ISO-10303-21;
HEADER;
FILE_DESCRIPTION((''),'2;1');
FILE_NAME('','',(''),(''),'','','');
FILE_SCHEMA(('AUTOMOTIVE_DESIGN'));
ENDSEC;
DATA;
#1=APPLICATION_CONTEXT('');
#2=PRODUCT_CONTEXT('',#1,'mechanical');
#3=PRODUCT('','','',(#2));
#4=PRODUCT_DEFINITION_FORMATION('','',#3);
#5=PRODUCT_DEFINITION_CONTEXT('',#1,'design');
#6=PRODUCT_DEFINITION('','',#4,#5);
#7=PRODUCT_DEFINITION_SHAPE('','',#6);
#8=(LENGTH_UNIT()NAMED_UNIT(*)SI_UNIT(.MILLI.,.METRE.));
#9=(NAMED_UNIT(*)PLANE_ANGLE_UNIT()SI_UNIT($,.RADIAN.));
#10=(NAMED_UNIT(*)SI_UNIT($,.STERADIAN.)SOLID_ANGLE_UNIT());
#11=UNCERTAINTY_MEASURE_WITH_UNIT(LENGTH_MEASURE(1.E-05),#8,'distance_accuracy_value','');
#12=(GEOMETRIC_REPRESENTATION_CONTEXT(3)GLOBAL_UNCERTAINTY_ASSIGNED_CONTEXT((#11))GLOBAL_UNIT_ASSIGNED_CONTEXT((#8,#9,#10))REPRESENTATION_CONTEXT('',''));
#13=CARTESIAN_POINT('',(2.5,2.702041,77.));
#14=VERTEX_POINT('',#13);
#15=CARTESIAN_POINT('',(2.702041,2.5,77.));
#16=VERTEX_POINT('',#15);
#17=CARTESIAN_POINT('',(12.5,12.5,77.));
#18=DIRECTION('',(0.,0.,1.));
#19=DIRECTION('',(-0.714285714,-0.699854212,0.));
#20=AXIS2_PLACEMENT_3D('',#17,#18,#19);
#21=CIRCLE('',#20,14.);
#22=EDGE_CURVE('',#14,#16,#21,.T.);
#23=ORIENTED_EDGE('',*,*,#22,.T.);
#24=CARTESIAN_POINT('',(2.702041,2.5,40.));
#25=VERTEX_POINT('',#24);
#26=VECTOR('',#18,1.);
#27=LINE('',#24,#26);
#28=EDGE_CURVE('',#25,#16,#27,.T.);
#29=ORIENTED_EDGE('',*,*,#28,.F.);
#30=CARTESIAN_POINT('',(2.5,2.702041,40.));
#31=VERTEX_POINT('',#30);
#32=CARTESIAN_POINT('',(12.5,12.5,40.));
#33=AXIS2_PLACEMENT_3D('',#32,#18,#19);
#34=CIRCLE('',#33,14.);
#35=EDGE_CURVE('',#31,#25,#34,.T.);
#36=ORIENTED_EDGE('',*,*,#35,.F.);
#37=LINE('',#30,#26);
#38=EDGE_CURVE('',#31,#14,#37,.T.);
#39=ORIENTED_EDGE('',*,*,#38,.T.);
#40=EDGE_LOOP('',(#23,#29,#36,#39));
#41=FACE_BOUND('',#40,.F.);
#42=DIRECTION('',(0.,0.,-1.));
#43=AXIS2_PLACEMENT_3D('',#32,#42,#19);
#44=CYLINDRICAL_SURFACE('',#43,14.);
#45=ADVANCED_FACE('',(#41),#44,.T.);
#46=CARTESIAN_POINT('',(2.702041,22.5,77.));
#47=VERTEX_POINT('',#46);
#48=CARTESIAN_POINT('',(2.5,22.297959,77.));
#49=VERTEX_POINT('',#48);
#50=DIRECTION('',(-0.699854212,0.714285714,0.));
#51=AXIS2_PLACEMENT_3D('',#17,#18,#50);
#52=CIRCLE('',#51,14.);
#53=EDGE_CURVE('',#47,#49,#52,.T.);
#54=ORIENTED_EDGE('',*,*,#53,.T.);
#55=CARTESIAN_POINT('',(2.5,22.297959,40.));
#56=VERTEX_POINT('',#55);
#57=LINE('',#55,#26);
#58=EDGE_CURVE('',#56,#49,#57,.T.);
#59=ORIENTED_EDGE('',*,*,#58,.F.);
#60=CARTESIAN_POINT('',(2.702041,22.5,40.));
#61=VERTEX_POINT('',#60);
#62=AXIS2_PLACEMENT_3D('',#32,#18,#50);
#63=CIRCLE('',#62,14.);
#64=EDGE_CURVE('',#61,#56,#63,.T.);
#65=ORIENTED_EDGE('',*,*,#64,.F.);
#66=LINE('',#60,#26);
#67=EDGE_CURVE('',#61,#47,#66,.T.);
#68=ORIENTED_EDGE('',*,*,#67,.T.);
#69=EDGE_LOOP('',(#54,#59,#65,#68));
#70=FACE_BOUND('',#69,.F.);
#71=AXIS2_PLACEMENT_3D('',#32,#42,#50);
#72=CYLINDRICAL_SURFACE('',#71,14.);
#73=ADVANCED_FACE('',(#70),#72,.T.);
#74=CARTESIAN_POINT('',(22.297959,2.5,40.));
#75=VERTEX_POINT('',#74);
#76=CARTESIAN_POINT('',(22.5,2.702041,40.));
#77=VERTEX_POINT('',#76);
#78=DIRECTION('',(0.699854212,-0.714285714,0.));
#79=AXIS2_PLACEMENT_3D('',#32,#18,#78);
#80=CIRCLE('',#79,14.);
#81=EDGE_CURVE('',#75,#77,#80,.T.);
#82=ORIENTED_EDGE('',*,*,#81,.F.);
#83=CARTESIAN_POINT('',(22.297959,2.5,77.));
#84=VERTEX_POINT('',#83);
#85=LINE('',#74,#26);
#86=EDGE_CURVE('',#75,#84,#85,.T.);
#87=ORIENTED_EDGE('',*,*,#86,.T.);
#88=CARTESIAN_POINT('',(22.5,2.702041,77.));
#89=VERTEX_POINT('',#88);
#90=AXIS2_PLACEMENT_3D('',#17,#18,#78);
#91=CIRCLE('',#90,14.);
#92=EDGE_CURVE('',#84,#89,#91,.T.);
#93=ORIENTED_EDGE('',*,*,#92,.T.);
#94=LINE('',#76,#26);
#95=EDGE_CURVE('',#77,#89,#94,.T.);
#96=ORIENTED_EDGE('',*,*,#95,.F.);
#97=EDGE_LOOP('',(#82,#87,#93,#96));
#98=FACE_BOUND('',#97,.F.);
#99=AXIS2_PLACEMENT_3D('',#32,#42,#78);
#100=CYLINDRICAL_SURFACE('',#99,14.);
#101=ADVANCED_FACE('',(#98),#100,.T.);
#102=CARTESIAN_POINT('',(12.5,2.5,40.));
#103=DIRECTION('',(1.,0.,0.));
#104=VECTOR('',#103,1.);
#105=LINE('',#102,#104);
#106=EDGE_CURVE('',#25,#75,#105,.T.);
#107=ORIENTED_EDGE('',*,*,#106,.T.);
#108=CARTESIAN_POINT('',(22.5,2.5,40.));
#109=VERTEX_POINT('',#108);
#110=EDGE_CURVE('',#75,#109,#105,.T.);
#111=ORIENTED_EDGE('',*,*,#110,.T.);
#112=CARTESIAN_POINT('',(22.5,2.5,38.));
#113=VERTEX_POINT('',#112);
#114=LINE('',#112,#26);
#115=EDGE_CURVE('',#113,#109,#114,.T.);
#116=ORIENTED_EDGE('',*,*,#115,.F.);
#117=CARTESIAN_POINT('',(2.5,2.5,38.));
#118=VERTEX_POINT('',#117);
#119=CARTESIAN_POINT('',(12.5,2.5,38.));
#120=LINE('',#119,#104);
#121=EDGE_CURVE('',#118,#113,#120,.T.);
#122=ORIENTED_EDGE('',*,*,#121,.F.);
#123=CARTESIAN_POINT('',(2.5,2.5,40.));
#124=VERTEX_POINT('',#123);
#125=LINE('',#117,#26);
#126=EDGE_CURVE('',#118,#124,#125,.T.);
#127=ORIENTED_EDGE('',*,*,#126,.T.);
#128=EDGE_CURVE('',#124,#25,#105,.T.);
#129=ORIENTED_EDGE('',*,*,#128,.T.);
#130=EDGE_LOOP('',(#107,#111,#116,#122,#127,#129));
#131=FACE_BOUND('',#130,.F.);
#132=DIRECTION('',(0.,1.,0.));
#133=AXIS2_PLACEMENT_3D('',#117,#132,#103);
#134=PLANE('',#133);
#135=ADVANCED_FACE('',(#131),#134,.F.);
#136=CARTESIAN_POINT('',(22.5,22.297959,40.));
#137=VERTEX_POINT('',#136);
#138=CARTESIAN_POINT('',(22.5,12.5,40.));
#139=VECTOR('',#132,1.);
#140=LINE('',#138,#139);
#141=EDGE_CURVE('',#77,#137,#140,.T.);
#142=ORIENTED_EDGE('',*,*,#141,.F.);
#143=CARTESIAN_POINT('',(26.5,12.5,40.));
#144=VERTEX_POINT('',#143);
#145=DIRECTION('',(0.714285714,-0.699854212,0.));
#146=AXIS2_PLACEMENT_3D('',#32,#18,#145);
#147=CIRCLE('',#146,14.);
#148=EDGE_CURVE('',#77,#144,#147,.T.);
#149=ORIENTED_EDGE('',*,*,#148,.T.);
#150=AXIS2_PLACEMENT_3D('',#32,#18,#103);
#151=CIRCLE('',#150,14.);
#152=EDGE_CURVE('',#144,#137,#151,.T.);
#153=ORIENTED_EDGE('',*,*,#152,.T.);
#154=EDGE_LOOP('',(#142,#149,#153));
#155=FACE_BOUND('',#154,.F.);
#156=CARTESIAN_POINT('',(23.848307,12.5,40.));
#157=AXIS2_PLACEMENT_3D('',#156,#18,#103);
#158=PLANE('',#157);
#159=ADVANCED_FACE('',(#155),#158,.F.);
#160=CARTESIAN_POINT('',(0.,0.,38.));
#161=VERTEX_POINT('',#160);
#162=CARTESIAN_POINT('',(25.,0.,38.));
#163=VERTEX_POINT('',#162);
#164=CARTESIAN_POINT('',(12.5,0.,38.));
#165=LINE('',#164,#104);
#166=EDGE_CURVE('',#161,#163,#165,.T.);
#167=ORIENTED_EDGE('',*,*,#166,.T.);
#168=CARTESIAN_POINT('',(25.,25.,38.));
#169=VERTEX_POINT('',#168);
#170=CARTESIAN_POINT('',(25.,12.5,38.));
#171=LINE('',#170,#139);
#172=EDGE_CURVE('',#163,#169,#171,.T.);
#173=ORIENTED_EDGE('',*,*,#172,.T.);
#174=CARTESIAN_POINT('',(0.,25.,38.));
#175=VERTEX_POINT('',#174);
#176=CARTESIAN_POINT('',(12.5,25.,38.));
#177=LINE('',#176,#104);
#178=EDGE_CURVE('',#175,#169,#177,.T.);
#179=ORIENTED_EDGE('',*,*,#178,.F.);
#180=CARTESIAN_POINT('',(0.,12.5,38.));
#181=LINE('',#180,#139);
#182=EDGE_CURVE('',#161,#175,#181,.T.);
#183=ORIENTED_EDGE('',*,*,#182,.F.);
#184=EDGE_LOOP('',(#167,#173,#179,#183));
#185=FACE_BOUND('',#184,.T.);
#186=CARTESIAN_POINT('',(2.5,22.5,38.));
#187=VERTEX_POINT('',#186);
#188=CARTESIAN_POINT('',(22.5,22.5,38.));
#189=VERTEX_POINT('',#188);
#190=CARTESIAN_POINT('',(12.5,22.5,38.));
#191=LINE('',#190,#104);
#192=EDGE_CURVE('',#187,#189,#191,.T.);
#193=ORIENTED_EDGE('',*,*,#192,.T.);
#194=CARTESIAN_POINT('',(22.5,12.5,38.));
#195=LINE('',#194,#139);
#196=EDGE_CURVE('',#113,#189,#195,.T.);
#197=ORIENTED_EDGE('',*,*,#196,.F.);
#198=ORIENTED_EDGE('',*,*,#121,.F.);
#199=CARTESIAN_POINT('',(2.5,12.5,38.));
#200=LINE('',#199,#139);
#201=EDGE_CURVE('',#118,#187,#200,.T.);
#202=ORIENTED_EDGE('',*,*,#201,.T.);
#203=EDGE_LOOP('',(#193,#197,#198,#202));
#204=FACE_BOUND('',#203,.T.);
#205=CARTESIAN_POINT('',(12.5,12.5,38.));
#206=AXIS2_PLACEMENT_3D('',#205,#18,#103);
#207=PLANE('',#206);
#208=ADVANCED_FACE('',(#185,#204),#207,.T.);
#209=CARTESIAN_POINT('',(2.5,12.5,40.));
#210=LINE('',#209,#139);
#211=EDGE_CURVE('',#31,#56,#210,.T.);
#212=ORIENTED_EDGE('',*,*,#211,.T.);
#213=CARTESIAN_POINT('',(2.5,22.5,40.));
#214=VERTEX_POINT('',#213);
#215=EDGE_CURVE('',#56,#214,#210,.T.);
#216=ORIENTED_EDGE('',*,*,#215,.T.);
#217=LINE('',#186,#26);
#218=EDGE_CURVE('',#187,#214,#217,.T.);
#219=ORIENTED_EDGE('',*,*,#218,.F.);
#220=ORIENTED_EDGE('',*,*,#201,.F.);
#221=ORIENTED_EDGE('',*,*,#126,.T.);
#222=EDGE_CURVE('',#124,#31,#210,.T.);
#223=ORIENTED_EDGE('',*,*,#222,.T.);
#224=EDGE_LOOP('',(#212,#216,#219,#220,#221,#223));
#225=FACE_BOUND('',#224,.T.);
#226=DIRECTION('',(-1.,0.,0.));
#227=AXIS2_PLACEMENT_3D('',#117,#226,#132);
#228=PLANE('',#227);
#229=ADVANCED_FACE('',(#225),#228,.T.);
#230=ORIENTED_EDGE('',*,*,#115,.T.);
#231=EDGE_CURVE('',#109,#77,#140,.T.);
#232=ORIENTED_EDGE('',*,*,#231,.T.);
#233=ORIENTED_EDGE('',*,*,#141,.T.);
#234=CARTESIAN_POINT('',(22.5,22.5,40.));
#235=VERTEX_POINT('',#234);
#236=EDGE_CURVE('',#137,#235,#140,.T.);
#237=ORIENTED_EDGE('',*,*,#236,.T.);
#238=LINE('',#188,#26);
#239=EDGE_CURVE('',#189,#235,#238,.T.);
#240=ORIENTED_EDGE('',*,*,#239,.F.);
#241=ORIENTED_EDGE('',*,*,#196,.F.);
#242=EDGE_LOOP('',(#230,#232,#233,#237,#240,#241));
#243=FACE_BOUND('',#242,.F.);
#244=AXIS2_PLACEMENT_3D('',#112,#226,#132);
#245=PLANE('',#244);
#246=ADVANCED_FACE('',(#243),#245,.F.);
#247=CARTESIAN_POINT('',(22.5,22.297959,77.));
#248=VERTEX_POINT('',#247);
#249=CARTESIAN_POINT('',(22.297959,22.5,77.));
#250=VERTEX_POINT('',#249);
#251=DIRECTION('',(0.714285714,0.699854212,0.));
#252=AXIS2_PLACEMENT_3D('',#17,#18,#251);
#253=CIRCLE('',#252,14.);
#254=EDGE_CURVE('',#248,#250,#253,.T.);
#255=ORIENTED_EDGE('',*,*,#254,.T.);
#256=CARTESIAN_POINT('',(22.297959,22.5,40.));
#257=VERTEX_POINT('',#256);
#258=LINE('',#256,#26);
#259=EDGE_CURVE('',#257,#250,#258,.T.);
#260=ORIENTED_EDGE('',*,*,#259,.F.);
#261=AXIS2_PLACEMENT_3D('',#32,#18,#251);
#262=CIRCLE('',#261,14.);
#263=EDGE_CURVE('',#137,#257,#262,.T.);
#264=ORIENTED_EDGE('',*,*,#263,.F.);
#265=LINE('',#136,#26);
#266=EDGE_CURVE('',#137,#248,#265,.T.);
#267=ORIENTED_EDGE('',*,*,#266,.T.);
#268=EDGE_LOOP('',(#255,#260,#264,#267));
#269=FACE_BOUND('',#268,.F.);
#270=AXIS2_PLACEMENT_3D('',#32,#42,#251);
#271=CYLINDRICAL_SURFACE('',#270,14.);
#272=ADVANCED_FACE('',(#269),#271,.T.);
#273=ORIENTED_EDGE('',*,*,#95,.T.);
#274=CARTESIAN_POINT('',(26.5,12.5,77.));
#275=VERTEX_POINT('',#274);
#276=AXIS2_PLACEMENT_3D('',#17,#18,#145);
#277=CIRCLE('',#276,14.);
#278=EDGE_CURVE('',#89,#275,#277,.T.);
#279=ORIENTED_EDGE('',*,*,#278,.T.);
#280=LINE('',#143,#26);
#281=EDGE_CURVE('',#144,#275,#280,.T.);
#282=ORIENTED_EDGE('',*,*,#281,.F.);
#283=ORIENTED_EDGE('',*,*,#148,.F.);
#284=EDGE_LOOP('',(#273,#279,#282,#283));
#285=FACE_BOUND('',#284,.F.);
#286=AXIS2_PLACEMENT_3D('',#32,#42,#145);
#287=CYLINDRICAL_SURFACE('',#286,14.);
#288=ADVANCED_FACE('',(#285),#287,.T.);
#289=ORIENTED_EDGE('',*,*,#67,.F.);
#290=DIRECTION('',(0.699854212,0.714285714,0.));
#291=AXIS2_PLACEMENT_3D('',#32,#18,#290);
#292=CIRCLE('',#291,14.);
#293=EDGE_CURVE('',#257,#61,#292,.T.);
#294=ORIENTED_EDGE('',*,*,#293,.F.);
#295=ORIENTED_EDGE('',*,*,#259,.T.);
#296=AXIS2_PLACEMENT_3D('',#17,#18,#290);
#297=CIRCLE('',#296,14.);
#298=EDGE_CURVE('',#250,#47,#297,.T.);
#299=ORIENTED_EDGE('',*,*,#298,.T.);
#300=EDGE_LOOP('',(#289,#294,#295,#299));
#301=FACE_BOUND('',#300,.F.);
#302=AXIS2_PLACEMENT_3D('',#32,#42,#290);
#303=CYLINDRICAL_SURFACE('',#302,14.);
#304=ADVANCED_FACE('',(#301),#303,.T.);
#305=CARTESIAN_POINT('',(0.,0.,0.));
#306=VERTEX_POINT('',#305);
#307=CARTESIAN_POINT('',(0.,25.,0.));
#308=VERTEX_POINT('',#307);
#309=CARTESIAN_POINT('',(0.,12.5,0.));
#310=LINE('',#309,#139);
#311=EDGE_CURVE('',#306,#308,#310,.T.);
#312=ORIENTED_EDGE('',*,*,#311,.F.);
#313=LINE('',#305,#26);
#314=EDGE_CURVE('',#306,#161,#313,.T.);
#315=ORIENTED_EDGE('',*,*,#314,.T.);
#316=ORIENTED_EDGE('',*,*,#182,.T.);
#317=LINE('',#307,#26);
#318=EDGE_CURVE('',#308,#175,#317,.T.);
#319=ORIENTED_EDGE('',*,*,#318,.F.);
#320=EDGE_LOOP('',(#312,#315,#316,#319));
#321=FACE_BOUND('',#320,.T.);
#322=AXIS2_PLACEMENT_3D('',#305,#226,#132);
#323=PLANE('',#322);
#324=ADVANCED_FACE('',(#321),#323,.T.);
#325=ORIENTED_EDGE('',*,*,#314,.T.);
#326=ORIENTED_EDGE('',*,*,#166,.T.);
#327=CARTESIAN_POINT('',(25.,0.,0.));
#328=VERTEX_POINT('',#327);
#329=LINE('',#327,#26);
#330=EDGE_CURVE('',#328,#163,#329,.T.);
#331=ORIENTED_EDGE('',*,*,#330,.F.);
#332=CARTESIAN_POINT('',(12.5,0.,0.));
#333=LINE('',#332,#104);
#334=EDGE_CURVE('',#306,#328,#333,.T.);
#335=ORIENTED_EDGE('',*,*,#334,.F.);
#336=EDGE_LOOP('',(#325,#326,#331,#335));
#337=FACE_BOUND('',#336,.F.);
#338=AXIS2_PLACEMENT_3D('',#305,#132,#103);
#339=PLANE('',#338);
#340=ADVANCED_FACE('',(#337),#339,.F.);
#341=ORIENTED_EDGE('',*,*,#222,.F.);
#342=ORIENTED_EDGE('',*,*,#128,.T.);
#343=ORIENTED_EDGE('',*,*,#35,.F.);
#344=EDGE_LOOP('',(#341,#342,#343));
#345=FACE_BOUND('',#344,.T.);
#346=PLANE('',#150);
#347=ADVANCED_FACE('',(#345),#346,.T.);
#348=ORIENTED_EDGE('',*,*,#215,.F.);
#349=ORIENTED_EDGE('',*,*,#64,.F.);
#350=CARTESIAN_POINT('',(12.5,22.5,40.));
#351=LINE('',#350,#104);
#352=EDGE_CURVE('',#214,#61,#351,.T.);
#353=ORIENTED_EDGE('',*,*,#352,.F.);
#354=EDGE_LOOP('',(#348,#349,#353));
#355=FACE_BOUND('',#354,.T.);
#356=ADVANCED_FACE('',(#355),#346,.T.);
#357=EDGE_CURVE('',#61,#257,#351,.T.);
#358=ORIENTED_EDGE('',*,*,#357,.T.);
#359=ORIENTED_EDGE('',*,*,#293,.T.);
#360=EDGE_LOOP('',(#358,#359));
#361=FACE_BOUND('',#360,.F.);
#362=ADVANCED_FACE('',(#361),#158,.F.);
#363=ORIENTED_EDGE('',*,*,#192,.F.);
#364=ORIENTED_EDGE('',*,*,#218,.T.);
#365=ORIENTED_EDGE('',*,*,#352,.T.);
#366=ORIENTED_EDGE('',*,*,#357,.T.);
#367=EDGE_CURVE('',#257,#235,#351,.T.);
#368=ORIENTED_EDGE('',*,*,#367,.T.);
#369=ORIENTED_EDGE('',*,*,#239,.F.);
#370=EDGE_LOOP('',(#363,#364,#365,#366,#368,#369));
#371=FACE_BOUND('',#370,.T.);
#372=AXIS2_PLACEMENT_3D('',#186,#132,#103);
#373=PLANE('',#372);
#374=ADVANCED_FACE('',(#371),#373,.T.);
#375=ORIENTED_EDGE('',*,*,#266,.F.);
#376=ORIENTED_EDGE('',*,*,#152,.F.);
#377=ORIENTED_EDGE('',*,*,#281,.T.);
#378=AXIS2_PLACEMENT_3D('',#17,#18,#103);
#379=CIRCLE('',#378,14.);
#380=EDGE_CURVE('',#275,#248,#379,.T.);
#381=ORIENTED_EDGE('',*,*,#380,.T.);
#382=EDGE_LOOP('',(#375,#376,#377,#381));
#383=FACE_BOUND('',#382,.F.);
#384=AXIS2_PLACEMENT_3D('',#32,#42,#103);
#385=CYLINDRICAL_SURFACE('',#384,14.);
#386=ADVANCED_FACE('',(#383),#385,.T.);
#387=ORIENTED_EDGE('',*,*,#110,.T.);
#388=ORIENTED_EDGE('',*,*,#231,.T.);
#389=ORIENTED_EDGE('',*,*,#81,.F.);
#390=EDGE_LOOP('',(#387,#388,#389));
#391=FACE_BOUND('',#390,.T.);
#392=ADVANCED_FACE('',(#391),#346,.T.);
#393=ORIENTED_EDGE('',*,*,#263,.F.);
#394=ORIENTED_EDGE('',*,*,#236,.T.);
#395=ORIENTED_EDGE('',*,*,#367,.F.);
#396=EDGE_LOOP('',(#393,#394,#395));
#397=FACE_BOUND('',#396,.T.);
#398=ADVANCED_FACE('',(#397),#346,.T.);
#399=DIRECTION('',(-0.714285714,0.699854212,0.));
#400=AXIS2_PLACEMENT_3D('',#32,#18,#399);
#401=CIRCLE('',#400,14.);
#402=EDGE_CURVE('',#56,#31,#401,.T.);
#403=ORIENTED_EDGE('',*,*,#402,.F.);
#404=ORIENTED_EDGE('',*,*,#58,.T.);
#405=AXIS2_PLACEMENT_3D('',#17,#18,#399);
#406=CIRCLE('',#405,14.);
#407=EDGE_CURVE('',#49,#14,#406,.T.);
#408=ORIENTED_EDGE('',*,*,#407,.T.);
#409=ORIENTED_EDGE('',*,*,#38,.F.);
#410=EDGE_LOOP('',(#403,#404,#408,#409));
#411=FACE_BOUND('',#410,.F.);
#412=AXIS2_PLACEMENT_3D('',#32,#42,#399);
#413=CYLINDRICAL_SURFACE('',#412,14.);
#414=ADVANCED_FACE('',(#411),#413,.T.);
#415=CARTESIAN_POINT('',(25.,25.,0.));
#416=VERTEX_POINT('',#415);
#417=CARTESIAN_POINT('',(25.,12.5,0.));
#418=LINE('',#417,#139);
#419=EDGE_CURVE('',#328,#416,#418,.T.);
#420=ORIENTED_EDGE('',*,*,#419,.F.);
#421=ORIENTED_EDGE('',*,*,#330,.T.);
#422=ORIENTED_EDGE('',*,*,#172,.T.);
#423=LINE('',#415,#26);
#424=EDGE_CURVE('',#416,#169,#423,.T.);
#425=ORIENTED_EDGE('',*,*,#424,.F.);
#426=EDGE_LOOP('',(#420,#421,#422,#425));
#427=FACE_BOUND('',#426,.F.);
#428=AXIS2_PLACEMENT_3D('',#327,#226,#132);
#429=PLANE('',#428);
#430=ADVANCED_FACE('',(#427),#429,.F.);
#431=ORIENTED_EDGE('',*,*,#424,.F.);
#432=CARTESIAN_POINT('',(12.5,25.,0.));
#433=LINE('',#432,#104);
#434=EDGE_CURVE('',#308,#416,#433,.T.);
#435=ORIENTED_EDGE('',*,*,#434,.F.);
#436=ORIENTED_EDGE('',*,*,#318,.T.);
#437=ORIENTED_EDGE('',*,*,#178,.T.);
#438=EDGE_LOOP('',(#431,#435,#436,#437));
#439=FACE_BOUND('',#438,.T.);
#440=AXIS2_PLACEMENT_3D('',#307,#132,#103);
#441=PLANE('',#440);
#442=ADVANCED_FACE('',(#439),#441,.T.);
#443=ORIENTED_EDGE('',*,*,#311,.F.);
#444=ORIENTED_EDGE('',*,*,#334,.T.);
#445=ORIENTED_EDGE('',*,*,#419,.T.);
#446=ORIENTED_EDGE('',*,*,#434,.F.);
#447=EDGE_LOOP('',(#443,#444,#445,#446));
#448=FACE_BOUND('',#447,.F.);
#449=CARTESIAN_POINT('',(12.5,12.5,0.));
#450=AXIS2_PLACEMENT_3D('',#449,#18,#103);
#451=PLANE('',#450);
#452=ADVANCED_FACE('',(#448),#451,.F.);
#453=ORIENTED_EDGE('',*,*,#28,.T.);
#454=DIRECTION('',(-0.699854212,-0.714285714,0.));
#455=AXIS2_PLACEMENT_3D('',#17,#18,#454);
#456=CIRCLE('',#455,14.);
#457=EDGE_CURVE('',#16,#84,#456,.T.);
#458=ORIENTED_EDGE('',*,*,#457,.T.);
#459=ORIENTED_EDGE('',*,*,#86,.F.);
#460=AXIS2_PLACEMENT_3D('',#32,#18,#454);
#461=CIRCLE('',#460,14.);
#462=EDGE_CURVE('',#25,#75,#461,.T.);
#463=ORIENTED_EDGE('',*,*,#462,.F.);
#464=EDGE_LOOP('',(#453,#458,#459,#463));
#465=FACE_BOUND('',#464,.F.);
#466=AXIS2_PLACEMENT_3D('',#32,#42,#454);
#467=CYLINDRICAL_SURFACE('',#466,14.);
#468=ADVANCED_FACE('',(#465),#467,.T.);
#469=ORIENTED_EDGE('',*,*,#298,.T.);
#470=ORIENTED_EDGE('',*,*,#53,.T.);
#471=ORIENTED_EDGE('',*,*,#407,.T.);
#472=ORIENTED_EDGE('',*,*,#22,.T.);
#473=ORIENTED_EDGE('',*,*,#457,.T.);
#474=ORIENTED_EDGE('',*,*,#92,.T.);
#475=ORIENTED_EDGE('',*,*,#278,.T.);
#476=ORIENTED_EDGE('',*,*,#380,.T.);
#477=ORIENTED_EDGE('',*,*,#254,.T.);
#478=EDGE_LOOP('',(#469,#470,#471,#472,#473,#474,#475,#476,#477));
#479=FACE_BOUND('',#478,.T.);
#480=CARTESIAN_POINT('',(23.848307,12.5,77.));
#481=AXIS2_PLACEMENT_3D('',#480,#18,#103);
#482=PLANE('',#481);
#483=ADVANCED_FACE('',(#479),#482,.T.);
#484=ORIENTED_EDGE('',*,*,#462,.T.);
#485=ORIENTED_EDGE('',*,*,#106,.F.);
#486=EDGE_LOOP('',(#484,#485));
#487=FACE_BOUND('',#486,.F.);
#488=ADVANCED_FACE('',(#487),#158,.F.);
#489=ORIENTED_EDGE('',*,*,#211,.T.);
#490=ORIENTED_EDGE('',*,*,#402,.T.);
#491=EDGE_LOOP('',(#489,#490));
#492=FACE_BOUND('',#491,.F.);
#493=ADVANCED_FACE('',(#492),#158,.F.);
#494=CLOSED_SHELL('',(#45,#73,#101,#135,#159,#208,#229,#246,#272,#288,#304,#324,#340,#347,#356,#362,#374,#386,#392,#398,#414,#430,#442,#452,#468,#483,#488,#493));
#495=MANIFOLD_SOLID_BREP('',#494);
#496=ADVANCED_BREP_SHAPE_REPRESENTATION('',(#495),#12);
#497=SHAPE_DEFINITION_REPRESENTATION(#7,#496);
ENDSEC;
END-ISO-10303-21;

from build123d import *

# Parameters (mm, degrees)
F0_W     = 25
F0_H     = 25
F1_DEPTH = 38
F2_W     = 20
F2_H     = 20
F3_DEPTH = 2
F5_DEPTH = 37


with BuildPart() as f1:
    # F0 (on Top) → F1 (new body)
    with BuildSketch(Plane.XY):
        with Locations((12.5, 12.5)):
            Rectangle(F0_W, F0_H)
    extrude(amount=F1_DEPTH)

    # F2 (on face) → F3 (join)
    with BuildSketch(Plane.XY.offset(38)):
        with Locations((12.5, 12.5)):
            Rectangle(F2_W, F2_H)
    extrude(amount=F3_DEPTH)

    # F4 (on face) → F5 (join)
    with BuildSketch(Plane.XY.offset(40)):
        with BuildLine():
            ThreePointArc((22.5, 2.7020410289), (25.4614813968, 7.2084973779), (26.5, 12.5))
            ThreePointArc((26.5, 12.5), (25.4614813968, 17.7915026221), (22.5, 22.2979589711))
            Line((22.5, 22.2979589711), (22.5, 2.7020410289))
        make_face()
        with BuildLine():
            Line((22.5, 2.7020410289), (22.5, 22.2979589711))
            ThreePointArc((22.5, 22.2979589711), (22.3994949366, 22.3994949366), (22.2979589711, 22.5))
            Line((22.2979589711, 22.5), (2.7020410289, 22.5))
            ThreePointArc((2.7020410289, 22.5), (2.6005050634, 22.3994949366), (2.5, 22.2979589711))
            Line((2.5, 22.2979589711), (2.5, 2.7020410289))
            ThreePointArc((2.5, 2.7020410289), (2.6005050634, 2.6005050634), (2.7020410289, 2.5))
            Line((2.7020410289, 2.5), (22.2979589711, 2.5))
            ThreePointArc((22.2979589711, 2.5), (22.3994949366, 2.6005050634), (22.5, 2.7020410289))
        make_face()
        with BuildLine():
            Line((2.7020410289, 22.5), (22.2979589711, 22.5))
            ThreePointArc((22.2979589711, 22.5), (12.5, 26.5), (2.7020410289, 22.5))
        make_face()
        with BuildLine():
            ThreePointArc((2.7020410289, 2.5), (12.5, -1.5), (22.2979589711, 2.5))
            Line((22.2979589711, 2.5), (2.7020410289, 2.5))
        make_face()
        with BuildLine():
            Line((2.5, 2.7020410289), (2.5, 22.2979589711))
            ThreePointArc((2.5, 22.2979589711), (-1.5, 12.5), (2.5, 2.7020410289))
        make_face()
    extrude(amount=F5_DEPTH)


solid = f1.part
